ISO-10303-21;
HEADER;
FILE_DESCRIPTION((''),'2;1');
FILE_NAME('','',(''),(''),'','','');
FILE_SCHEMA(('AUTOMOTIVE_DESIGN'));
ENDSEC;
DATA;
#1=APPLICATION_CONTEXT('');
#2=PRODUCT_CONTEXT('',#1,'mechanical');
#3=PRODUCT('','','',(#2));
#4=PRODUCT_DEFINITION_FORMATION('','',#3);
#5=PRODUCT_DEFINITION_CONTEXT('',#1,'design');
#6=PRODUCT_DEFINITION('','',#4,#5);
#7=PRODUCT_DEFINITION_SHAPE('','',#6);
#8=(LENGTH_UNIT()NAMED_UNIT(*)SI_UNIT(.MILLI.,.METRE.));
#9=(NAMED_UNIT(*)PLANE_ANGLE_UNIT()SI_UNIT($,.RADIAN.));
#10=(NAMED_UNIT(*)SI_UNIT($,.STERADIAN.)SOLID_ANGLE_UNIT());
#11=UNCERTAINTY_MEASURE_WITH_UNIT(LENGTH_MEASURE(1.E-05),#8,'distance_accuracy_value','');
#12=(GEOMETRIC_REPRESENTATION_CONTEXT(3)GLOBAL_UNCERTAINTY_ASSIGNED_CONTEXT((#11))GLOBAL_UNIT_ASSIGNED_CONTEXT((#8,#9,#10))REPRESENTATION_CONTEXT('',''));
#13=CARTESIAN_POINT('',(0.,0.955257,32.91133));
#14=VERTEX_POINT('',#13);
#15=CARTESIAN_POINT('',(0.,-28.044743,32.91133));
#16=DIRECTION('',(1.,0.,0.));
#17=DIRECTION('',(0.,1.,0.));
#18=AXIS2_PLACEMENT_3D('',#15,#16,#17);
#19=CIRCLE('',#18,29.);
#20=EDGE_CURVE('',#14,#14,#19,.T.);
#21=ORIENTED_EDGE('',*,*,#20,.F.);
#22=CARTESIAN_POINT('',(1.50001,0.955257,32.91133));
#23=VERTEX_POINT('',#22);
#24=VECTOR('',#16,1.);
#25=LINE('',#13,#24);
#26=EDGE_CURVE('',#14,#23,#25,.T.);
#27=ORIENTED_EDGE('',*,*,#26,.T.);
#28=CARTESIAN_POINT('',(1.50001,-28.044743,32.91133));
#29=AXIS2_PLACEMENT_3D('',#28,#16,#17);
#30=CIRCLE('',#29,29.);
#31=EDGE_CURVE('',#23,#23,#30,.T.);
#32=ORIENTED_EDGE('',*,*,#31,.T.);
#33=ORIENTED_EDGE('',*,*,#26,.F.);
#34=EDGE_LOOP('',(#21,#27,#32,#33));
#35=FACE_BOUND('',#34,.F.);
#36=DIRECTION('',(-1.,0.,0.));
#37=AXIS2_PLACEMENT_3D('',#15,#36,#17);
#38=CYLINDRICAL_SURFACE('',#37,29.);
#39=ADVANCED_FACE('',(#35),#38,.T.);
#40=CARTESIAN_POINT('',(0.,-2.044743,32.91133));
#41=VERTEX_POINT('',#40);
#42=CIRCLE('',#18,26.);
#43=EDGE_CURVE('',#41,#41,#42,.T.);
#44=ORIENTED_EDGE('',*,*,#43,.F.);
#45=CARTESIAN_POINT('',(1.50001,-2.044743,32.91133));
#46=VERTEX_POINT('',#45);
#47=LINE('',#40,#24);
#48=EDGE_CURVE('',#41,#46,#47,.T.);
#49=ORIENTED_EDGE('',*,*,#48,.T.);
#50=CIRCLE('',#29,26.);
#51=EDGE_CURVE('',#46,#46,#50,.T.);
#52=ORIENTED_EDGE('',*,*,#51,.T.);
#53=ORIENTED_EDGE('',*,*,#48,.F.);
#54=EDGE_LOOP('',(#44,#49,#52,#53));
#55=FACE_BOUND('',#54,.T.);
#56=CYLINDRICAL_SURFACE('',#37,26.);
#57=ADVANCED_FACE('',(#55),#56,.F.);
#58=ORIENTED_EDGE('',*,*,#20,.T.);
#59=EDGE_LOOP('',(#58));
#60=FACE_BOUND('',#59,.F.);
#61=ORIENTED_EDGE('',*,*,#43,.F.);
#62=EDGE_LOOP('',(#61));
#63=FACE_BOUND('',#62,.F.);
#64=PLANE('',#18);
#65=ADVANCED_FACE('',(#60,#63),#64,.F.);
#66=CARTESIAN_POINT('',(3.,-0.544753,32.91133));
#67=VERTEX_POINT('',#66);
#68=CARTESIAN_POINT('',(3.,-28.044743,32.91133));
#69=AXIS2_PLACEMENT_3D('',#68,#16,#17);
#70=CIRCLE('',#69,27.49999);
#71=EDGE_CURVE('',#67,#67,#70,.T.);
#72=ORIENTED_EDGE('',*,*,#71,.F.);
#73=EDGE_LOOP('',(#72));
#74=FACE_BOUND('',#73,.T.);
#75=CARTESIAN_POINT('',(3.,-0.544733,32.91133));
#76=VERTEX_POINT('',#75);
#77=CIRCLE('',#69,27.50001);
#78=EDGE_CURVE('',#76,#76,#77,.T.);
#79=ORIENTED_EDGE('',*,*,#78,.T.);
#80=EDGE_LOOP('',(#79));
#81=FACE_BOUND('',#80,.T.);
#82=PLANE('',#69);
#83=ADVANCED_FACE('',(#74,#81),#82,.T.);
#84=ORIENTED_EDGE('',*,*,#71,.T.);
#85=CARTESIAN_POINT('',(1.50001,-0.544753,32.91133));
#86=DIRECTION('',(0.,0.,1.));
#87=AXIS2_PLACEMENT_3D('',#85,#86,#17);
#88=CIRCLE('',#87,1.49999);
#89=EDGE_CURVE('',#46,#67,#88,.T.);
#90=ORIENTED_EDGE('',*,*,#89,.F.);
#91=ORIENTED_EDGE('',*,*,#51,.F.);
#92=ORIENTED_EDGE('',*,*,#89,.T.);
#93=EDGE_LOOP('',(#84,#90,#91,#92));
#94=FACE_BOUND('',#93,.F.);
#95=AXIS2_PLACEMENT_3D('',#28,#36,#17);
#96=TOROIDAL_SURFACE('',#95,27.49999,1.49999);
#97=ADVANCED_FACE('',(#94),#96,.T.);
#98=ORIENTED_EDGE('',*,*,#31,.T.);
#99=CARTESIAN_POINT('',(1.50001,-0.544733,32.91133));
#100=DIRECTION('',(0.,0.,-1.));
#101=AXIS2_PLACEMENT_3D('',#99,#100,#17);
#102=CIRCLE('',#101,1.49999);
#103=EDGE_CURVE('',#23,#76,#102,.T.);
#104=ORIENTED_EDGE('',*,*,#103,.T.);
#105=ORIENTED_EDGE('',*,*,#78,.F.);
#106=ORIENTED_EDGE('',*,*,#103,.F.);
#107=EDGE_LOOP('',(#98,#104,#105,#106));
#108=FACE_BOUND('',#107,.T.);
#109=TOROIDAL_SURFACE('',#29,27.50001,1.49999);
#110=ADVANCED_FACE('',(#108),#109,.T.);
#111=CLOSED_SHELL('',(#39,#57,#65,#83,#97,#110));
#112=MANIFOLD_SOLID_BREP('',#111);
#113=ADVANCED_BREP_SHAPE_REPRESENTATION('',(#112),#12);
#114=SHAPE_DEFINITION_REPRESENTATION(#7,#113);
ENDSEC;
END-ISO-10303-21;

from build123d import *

# Parameters (mm, degrees)
F0_R     = 29
F0_R_2   = 26
F1_DEPTH = 3
F2_R     = 1.49999


# Not quite as in the source:
# - a fillet or chamfer is up to 0.001 mm smaller than in the source, because OpenCascade refuses the exact size


with BuildPart() as f1:
    # F0 (on Right) → F1 (new body)
    with BuildSketch(Plane.YZ):
        with Locations((-28.0447434634, 32.9113304615)):
            Circle(F0_R)
        with Locations((-28.0447434634, 32.9113304615)):
            Circle(F0_R_2, mode=Mode.SUBTRACT)
    extrude(amount=F1_DEPTH)

    # F2 (radius 1.5 in the source; OpenCascade refuses exactly that, so slightly less here)
    f2_edges = [f1.edges().sort_by_distance(p)[0] for p in [
        (3, -57.044743, 32.91133),
        (3, -54.044743, 32.91133),
    ]]
    fillet(f2_edges, radius=F2_R)


solid = f1.part
